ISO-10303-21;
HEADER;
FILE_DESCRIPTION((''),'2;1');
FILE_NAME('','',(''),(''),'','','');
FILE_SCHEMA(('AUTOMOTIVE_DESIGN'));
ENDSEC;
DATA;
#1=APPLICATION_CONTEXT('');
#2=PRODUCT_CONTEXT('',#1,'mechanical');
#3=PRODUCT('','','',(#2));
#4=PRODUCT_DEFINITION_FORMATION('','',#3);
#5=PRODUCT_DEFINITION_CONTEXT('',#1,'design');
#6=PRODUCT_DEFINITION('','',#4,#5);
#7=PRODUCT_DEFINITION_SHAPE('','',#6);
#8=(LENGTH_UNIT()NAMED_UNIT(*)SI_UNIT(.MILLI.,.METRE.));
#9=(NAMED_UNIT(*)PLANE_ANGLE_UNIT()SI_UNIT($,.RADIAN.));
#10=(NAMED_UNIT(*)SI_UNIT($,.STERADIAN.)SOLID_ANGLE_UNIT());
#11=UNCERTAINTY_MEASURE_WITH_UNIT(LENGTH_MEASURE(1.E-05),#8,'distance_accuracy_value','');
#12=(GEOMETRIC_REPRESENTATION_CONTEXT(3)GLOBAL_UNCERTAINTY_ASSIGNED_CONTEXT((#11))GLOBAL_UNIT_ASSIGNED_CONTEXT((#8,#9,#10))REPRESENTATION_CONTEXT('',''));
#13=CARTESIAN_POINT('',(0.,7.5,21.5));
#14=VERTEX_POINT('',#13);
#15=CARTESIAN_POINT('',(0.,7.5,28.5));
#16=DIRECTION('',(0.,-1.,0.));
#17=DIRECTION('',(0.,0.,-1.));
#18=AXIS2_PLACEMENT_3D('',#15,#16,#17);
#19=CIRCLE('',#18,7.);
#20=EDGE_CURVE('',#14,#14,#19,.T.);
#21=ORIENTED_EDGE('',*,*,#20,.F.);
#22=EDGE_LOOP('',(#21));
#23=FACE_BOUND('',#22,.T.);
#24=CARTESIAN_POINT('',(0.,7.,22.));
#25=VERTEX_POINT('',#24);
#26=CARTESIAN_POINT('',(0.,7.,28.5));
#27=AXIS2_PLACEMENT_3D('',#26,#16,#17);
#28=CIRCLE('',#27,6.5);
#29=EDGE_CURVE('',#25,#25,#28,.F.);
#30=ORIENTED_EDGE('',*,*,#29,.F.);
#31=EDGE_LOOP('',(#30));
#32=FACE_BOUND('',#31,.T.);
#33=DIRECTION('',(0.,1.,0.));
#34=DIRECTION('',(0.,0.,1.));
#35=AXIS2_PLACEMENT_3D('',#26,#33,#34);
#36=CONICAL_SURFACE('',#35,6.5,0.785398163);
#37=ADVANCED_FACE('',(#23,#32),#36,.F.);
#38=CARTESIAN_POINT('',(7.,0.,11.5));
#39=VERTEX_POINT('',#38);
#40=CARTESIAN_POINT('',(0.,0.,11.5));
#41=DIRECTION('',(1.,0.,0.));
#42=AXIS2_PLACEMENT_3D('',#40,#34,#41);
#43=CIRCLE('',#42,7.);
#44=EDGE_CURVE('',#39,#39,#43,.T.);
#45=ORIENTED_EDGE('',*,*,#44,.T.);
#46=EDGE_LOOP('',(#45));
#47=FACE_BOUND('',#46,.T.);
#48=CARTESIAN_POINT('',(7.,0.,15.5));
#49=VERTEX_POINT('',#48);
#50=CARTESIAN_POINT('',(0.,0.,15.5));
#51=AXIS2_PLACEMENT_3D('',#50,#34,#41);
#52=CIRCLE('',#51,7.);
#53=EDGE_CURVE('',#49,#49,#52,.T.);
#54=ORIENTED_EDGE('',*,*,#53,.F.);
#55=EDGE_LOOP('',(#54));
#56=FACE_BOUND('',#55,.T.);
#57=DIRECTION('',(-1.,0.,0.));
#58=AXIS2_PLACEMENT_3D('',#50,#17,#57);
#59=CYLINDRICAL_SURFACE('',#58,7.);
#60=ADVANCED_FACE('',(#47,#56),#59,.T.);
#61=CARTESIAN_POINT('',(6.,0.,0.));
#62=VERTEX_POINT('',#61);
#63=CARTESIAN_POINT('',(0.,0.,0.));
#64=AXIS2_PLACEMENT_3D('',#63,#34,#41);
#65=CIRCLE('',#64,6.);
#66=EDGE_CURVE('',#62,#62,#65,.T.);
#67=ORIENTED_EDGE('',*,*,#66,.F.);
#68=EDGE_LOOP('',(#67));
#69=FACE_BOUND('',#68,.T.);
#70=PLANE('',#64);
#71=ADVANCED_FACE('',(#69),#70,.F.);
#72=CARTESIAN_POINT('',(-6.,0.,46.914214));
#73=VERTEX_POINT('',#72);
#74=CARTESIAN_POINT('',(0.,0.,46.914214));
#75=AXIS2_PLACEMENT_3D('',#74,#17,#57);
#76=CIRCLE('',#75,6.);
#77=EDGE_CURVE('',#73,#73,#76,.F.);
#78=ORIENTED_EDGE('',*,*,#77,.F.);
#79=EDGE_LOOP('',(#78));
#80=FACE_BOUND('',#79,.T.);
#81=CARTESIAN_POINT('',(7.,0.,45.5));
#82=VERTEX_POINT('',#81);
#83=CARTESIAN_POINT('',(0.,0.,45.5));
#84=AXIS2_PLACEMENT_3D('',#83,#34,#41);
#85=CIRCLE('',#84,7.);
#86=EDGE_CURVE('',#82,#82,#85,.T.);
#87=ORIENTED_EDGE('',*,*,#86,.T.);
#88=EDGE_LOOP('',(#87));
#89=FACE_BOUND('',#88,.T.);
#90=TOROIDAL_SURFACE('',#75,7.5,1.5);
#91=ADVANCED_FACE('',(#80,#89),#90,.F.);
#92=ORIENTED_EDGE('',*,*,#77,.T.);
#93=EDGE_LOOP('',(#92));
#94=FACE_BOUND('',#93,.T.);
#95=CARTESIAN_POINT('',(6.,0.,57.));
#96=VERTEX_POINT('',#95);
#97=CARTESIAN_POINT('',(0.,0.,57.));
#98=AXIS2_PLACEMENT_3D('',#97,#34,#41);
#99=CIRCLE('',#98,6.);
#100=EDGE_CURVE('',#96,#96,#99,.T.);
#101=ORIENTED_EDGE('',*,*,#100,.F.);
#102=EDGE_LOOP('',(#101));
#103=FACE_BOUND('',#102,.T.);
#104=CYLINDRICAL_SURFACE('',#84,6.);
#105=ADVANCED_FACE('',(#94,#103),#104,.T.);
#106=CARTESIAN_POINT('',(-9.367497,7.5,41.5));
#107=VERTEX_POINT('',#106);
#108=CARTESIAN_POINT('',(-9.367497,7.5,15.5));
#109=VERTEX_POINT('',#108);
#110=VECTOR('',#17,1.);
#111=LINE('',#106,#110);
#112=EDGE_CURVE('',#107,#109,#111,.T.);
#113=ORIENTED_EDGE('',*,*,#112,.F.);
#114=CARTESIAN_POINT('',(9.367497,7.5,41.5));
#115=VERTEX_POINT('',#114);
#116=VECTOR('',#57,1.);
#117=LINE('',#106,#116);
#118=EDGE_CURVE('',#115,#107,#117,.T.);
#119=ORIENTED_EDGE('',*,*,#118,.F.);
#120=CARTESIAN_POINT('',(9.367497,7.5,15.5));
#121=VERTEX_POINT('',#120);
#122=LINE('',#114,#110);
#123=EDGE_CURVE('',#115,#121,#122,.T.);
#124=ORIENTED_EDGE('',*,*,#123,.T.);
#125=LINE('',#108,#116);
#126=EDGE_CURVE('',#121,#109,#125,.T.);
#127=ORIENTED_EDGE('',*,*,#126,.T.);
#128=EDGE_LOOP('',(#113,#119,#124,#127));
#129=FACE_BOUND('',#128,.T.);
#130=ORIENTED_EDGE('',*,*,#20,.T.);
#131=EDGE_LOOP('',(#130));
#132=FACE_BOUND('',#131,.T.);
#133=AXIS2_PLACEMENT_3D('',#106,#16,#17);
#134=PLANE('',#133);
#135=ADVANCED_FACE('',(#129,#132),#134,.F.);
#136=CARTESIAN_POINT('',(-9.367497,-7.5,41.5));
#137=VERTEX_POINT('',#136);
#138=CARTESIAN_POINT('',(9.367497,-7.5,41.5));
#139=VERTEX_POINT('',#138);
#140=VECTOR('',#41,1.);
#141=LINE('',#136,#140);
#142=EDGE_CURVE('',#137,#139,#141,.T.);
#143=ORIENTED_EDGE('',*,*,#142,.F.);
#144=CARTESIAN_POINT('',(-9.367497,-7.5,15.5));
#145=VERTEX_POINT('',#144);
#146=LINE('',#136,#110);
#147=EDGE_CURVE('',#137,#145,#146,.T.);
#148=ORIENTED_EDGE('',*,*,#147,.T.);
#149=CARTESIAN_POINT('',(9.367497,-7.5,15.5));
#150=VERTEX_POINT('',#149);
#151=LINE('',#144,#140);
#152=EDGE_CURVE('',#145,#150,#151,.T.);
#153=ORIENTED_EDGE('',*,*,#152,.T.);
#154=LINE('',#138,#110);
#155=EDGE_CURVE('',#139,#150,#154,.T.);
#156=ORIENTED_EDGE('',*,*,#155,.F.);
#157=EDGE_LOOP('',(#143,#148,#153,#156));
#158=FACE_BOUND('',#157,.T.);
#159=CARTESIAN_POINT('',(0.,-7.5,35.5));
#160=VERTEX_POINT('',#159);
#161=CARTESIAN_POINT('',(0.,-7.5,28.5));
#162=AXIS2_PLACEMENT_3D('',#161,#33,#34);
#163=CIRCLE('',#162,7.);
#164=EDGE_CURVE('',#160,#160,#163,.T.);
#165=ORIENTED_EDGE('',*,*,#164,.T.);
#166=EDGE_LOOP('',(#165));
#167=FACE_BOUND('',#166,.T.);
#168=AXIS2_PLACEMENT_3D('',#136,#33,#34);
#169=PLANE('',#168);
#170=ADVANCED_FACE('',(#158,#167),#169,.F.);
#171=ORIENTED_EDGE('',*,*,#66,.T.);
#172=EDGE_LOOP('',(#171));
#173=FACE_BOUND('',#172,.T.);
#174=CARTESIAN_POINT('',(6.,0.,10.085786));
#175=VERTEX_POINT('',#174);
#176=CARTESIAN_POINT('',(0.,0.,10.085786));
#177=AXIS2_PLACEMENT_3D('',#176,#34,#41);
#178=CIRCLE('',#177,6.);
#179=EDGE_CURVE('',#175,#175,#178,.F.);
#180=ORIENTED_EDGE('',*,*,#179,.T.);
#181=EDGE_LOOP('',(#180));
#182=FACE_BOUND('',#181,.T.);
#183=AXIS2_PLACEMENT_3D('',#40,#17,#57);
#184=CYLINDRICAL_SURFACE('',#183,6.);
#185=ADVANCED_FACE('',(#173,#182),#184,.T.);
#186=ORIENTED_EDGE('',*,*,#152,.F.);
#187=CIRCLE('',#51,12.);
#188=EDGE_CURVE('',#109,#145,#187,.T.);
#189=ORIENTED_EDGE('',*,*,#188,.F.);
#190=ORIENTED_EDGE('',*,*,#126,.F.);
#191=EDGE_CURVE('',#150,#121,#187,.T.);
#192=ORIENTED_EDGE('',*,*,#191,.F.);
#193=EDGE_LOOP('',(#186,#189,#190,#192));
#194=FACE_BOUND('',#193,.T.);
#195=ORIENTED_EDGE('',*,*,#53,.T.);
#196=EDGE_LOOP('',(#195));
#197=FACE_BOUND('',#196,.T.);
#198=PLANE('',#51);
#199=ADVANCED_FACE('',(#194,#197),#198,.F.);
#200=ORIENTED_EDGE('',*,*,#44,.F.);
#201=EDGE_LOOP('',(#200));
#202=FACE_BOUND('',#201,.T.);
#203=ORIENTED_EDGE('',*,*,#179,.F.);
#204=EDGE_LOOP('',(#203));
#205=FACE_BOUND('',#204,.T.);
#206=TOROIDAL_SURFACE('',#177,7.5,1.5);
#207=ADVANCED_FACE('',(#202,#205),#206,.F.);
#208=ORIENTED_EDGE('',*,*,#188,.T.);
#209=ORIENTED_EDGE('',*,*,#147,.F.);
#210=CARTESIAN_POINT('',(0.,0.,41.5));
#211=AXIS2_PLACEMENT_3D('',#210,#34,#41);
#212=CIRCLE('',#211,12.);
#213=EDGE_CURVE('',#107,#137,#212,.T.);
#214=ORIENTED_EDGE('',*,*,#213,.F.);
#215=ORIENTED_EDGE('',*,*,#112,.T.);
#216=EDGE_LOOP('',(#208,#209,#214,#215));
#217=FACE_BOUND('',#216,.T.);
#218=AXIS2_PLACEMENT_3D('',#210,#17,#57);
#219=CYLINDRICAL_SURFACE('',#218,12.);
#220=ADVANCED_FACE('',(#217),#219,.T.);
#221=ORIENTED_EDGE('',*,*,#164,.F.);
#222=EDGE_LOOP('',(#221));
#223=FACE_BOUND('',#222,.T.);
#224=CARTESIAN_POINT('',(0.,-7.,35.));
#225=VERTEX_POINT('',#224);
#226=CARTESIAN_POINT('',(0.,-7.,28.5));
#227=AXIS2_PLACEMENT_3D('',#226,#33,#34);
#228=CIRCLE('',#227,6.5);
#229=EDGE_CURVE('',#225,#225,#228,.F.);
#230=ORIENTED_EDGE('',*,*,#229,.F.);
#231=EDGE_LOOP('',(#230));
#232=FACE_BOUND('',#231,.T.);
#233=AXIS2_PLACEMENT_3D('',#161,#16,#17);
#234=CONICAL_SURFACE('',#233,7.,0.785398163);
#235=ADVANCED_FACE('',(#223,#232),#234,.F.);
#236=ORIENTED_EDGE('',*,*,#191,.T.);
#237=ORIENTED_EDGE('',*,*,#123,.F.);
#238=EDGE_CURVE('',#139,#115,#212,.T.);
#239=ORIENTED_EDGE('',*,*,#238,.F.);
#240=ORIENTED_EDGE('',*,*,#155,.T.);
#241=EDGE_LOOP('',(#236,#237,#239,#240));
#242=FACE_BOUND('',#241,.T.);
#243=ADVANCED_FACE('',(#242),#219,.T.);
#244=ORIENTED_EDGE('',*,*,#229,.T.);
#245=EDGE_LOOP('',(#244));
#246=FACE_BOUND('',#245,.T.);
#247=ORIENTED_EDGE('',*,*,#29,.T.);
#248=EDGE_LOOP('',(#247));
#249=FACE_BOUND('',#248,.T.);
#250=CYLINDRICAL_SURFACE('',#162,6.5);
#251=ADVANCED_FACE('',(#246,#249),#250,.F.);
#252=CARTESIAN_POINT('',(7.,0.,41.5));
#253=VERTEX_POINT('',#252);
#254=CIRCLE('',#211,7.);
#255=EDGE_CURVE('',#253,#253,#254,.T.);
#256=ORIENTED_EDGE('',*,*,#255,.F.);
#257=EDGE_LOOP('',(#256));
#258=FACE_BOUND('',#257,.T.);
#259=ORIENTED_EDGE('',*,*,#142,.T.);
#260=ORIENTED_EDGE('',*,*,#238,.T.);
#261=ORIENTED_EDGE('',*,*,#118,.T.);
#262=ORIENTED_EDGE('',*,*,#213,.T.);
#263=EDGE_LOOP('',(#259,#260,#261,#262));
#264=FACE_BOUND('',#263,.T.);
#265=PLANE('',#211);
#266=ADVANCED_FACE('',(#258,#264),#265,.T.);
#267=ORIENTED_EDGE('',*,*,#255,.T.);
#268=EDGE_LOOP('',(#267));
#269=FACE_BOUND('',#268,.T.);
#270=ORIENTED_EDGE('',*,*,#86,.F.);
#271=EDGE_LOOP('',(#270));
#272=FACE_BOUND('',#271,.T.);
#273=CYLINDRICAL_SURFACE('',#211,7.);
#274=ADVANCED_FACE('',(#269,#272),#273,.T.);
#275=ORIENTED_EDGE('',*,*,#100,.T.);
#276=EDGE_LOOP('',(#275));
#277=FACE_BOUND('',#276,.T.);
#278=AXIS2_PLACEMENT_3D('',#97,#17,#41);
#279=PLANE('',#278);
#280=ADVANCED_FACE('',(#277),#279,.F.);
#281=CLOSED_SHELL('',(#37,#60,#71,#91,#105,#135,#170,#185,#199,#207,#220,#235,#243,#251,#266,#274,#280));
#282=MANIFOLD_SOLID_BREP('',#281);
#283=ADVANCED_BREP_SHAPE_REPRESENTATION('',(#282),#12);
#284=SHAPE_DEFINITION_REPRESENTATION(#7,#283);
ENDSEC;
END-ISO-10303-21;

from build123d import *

# Parameters (mm, degrees)
SCHIZZO2_R                   = 6
ESTRUSIONE_ESTRUSIONE1_DEPTH = 11.5
SCHIZZO3_R                   = 7
ESTRUSIONE_ESTRUSIONE2_DEPTH = 4
ESTRUSIONE_ESTRUSIONE3_DEPTH = 26
RACCORDO2_R                  = 1.5
SCHIZZO6_R                   = 6.5
TAGLIO_ESTRUSIONE2_DEPTH     = 61.149812967
SMUSSO2_SIZE                 = 0.5


with BuildPart() as part:
    # Schizzo2 → Estrusione-Estrusione1 (new body)
    with BuildSketch(Plane.XY):
        Circle(SCHIZZO2_R)
    estrusione_estrusione1 = extrude(amount=ESTRUSIONE_ESTRUSIONE1_DEPTH)

    # Schizzo3 → Estrusione-Estrusione2 (add)
    with BuildSketch(Plane.XY.offset(11.5)):
        Circle(SCHIZZO3_R)
    estrusione_estrusione2 = extrude(amount=ESTRUSIONE_ESTRUSIONE2_DEPTH)

    # Schizzo4 → Estrusione-Estrusione3 (add)
    with BuildSketch(Plane.XY.offset(15.5)):
        with BuildLine():
            Line((-9.367496998, 7.5), (9.367496998, 7.5))
            ThreePointArc((9.367496998, 7.5), (12, 0), (9.367496998, -7.5))
            Line((9.367496998, -7.5), (-9.367496998, -7.5))
            ThreePointArc((-9.367496998, -7.5), (-12, 0), (-9.367496998, 7.5))
        make_face()
    extrude(amount=ESTRUSIONE_ESTRUSIONE3_DEPTH)

    # Specchia1: Estrusione-Estrusione2 across plane
    add(estrusione_estrusione2.mirror(Plane.XY.offset(28.5)))

    # Specchia2: Estrusione-Estrusione1 across plane
    add(estrusione_estrusione1.mirror(Plane.XY.offset(28.5)))

    # Raccordo2
    # the kernel refuses this fillet: 1.5 mm, written as the material it adds along each edge
    with BuildSketch(Plane(origin=(0, 0, 45.5), x_dir=(1, 0, 0), z_dir=(0, -1, 0))) as raccordo2_piece_1:
        with BuildLine():
            CenterArc((7.5, 1.414213562), RACCORDO2_R, 180, 70.528779366)
            Line((6, 1.414213562), (5.97, 1.414213562))
            Line((5.97, 1.414213562), (5.97, 0))
            Line((5.97, 0), (6, -0.03))
            ThreePointArc((6, -0.03), (6.5, -0.03), (6.99, -0.028284271))
            Line((6.99, -0.028284271), (7, 0))
        make_face()
    revolve(axis=Axis((0, 0, 45.5), (0, 0, 1)))
    with BuildSketch(Plane(origin=(0, 0, 11.5), x_dir=(1, 0, 0), z_dir=(0, -1, 0))) as raccordo2_piece_2:
        with BuildLine():
            CenterArc((7.5, -1.414213562), RACCORDO2_R, 109.471220634, 70.528779366)
            Line((6, -1.414213562), (5.97, -1.414213562))
            Line((5.97, -1.414213562), (5.97, 0))
            Line((5.97, 0), (6, 0.03))
            ThreePointArc((6, 0.03), (6.5, 0.03), (6.99, 0.028284271))
            Line((6.99, 0.028284271), (7, 0))
        make_face()
    revolve(axis=Axis((0, 0, 11.5), (0, 0, 1)))

    # Schizzo6 → Taglio-Estrusione2 (cut, through all)
    with BuildSketch(Plane(origin=(0, 7.5, 0), x_dir=(1, 0, 0), z_dir=(0, 1, 0))):
        with Locations(Location((0, -28.5, 0), (0, 0, 270))):
            Circle(SCHIZZO6_R)
    extrude(amount=-TAGLIO_ESTRUSIONE2_DEPTH, mode=Mode.SUBTRACT)

    # Smusso2
    smusso2_edges = [part.edges().sort_by_distance(p)[0] for p in [
        (0, -7.5, 22),
        (0, 7.5, 22),
    ]]
    chamfer(smusso2_edges, length=SMUSSO2_SIZE)


solid = part.part
